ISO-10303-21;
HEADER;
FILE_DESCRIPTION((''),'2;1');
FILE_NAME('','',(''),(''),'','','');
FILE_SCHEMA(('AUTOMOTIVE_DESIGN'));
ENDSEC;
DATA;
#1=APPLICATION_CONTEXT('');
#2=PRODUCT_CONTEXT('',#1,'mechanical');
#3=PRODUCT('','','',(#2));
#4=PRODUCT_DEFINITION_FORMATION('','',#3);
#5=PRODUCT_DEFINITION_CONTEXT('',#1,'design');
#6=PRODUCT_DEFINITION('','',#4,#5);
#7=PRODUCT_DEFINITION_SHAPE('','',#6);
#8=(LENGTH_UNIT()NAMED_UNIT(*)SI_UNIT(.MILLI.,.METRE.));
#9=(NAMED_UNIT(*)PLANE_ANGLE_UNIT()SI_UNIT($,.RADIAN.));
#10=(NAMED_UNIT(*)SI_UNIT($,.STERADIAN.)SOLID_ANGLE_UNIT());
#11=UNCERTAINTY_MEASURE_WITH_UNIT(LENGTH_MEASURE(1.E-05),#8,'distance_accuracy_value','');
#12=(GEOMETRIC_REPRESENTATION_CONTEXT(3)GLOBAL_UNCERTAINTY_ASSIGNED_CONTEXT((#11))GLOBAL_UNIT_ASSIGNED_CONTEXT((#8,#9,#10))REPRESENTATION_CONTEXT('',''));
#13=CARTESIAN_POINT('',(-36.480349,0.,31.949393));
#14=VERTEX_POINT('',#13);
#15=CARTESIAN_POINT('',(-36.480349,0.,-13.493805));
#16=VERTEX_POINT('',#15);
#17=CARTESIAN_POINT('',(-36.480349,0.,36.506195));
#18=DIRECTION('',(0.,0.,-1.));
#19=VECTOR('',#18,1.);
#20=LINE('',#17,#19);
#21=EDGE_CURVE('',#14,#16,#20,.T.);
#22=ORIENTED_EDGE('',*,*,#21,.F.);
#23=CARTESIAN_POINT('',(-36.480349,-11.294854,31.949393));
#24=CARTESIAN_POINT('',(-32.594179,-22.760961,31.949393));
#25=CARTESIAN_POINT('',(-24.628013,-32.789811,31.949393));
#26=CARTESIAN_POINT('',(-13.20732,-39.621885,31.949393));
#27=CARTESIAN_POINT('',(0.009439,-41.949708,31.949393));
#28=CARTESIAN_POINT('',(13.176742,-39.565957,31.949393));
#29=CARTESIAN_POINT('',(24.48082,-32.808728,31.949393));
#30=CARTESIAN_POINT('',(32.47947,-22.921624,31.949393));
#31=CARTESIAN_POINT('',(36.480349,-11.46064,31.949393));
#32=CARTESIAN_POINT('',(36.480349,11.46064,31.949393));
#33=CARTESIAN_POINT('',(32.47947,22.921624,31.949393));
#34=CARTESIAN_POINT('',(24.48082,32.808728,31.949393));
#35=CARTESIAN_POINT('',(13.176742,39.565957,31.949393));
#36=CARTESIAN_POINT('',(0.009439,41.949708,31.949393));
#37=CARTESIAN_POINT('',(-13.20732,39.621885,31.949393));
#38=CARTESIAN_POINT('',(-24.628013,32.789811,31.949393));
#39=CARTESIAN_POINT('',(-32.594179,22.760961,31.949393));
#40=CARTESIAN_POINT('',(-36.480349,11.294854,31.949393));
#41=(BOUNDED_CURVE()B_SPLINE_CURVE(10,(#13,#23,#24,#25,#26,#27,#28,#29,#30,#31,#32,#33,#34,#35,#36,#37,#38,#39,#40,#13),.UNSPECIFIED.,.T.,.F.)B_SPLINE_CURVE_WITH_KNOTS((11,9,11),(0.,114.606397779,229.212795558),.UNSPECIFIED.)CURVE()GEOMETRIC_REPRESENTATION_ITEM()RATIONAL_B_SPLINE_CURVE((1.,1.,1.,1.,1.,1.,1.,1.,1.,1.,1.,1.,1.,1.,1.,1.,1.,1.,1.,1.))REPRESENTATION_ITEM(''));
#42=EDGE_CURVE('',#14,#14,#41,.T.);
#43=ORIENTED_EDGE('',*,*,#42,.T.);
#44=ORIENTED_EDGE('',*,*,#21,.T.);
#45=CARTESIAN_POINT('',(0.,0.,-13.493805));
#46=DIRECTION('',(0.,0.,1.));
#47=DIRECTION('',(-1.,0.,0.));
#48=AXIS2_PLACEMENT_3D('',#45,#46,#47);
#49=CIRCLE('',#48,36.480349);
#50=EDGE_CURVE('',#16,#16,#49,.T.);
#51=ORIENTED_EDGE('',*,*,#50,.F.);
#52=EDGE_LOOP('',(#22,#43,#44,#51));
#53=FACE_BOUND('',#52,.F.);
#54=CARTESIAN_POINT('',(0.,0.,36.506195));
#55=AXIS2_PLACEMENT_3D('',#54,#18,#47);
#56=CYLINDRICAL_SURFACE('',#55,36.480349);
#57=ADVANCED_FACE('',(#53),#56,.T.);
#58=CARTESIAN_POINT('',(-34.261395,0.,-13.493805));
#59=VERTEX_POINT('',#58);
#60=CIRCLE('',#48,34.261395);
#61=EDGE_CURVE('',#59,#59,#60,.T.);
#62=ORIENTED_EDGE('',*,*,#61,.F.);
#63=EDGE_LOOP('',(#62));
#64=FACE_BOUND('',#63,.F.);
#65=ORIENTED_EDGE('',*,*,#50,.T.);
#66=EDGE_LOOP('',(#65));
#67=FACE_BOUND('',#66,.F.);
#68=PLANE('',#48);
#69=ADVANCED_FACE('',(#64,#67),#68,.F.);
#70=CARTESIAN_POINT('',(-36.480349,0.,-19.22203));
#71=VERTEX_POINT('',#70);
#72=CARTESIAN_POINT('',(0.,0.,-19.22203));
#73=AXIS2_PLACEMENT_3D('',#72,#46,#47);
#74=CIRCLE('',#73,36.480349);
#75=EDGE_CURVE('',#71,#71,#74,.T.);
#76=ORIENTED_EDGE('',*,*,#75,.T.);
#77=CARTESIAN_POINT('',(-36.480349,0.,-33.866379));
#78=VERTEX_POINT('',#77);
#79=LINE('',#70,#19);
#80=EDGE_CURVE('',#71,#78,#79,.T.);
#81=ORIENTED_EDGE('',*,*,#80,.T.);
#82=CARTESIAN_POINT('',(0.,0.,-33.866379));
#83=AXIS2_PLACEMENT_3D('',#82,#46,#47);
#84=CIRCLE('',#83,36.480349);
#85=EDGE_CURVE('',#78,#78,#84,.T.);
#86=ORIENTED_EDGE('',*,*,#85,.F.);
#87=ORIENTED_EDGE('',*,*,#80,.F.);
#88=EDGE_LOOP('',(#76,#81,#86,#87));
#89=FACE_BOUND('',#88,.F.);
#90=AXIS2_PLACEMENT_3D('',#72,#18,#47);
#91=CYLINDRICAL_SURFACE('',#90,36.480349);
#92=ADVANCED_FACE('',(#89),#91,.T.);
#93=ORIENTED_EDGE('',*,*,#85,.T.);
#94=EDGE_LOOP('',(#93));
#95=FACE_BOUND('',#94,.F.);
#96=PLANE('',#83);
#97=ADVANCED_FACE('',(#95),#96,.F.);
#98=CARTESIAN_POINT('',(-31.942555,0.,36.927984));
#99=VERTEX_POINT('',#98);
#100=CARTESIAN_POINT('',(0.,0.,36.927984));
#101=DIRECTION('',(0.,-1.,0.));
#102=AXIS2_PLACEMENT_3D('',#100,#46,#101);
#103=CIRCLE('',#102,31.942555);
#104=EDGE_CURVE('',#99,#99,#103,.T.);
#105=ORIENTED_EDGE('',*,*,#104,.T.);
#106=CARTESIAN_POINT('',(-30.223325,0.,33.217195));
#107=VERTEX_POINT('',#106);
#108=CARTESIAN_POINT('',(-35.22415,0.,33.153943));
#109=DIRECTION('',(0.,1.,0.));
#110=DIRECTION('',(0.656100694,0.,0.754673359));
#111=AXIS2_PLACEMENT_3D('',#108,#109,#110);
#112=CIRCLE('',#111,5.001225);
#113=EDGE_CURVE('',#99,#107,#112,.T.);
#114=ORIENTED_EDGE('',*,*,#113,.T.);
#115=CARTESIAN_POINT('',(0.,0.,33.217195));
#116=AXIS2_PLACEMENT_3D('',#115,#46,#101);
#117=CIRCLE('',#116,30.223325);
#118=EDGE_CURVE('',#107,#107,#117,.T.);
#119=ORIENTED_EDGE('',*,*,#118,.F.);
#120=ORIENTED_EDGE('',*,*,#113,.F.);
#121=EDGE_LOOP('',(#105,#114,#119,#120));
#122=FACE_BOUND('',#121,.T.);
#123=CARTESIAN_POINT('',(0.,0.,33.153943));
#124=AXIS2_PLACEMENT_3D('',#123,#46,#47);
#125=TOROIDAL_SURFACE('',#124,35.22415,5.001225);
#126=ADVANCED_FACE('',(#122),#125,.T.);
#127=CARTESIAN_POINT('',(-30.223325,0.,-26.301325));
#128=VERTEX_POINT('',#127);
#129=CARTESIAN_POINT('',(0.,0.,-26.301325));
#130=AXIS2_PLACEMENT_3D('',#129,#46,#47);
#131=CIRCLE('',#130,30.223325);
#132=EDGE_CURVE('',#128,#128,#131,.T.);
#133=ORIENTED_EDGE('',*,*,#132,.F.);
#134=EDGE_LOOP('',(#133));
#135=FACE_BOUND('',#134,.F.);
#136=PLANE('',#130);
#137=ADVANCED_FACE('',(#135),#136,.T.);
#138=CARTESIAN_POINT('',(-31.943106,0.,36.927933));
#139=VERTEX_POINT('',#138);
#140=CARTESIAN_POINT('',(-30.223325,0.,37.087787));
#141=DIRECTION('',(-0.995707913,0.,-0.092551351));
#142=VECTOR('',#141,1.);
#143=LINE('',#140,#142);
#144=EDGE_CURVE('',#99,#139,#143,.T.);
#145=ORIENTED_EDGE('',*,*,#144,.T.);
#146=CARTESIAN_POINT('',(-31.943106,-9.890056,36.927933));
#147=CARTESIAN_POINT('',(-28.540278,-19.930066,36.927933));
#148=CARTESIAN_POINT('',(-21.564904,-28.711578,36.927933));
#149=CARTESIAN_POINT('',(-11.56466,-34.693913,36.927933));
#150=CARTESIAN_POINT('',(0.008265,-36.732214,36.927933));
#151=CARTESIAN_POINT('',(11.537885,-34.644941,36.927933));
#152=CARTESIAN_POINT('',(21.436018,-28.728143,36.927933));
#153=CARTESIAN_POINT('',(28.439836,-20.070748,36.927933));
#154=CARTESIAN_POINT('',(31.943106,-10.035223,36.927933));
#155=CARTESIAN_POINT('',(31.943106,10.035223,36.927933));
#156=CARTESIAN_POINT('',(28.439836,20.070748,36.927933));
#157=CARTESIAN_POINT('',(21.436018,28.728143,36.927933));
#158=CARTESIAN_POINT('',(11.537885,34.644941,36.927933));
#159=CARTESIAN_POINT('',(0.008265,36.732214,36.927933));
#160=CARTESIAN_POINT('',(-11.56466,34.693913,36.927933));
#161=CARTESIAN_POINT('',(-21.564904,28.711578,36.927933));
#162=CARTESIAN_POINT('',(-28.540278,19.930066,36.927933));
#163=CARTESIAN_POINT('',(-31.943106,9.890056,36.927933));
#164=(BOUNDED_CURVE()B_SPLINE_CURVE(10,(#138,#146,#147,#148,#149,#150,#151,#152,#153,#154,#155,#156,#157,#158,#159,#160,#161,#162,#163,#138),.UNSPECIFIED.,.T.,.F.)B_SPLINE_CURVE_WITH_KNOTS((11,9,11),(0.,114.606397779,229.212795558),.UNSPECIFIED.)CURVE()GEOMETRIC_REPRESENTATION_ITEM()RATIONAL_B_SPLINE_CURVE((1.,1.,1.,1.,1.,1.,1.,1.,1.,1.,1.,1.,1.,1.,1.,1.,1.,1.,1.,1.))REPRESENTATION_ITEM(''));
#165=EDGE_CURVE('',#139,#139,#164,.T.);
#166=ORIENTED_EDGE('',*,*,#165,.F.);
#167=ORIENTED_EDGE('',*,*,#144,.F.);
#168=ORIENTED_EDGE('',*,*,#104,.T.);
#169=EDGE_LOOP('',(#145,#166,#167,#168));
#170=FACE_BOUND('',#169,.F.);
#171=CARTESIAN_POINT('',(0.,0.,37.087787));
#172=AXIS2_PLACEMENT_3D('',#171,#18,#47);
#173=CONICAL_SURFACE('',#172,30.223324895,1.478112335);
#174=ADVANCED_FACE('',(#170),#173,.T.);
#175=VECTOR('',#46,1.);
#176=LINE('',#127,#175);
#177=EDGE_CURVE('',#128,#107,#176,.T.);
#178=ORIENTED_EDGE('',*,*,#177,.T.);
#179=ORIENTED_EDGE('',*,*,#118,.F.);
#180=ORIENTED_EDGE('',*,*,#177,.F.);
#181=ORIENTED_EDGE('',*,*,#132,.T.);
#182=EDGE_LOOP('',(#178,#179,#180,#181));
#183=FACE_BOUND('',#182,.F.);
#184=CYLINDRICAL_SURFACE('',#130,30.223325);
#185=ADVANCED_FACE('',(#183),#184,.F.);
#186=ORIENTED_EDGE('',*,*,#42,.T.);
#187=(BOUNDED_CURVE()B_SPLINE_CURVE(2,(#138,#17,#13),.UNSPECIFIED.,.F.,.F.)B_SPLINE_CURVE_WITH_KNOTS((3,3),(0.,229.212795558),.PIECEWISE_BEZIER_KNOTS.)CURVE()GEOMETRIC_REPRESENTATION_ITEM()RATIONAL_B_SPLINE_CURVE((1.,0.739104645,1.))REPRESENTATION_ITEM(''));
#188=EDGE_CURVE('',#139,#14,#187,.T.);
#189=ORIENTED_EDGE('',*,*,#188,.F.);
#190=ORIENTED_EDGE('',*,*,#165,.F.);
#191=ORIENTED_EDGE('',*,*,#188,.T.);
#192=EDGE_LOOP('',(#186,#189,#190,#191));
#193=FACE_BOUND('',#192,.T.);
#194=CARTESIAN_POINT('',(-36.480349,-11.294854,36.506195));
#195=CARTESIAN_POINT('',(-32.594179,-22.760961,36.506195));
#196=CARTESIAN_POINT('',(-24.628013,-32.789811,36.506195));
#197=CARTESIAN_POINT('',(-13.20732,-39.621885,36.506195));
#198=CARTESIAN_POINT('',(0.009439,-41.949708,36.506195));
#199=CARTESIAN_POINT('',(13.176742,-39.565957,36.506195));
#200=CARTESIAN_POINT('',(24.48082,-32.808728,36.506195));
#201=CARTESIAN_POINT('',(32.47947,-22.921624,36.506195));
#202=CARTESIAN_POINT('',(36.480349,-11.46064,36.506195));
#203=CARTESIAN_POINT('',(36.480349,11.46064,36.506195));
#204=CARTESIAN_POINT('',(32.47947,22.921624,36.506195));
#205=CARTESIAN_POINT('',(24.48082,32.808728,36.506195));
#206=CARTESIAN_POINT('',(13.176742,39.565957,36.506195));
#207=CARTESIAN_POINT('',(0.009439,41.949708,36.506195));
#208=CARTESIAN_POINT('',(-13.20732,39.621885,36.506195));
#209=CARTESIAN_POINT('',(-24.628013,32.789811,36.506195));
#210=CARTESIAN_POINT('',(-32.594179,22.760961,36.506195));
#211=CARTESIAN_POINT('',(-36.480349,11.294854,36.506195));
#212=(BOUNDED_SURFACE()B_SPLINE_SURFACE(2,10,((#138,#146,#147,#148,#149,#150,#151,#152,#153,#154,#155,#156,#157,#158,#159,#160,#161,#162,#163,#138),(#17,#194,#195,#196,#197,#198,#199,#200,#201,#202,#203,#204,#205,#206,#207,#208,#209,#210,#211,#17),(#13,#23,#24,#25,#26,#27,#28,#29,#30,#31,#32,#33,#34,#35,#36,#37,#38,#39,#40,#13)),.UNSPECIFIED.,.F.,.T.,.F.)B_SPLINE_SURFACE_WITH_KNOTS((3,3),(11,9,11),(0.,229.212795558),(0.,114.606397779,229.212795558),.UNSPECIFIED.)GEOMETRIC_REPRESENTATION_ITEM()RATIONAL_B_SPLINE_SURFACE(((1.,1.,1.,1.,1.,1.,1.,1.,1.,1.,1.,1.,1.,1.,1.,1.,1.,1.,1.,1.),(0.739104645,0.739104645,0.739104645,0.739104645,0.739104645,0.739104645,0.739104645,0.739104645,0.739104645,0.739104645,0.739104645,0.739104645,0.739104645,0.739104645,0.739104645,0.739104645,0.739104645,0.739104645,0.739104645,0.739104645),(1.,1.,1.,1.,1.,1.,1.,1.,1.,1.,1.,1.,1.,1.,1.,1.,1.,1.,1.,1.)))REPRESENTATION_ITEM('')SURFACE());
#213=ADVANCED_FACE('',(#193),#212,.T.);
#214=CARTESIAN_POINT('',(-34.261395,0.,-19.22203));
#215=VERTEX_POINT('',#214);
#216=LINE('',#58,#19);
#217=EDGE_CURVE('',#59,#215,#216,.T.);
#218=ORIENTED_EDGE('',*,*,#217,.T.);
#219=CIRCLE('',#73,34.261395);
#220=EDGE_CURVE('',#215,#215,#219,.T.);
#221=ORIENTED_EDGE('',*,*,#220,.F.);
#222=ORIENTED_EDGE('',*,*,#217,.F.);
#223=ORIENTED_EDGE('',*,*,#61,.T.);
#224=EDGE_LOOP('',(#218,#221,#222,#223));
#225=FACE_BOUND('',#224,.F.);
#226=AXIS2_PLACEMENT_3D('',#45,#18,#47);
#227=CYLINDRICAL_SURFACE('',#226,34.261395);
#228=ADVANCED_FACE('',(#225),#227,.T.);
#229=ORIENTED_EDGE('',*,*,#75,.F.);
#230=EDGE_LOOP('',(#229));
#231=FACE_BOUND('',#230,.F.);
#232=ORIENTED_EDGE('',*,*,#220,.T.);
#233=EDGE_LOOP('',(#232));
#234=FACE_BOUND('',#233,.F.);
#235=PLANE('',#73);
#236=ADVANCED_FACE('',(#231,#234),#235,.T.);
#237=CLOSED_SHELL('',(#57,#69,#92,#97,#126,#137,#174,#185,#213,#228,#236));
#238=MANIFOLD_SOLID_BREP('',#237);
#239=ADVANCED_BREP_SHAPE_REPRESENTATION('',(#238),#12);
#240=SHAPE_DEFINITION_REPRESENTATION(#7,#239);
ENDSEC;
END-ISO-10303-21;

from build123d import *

# Parameters (mm, degrees)
F2_R = 5


# Not quite as in the source:
# - a fillet or chamfer that OpenCascade refuses, or shapes differently, is made with other operations: its cross-section is extruded or revolved along the edge and cut away or added


with BuildPart() as f1:
    # F0 (on Front) → F1 (revolve)
    with BuildSketch(Plane.XZ):
        Polygon((-30.2233248949, 37.0877869427), (-36.4803494329, 36.5061946213), (-36.4803494329, -13.4938053787), (-34.2613953475, -13.4938053787), (-34.2613953475, -19.2220297002), (-36.4803494329, -19.2220297002), (-36.4803494329, -33.86637941), (-19.9121574584, -33.86637941), (0, -33.86637941), (0, -26.3013252845), (-30.2233248949, -26.3013252845), align=None)
    revolve(axis=Axis((0, 0, -30.0838523473), (0, 0, 1)))

    # F2
    f2_edges = [f1.edges().sort_by_distance(p)[0] for p in [
        (36.480349, 0, 36.506195),
    ]]
    fillet(f2_edges, radius=F2_R)

    # F3: fillet of radius 5 on 2 edges, made by hand

    # F3_s1 → F3_t2 (revolve, cut)
    with BuildSketch(Plane.XZ):
        with BuildLine():
            ThreePointArc((-31.9428428579, 36.9282346211), (-30.6731716306, 35.2277917828), (-30.2229248949, 33.1539430061))
            Line((-30.2229248949, 33.1539430061), (-29.7228023494, 33.1539430061))
            ThreePointArc((-29.7228023494, 33.1539430061), (-29.7232023494, 35.1208649744), (-29.7232023494, 37.0877869427))
            Line((-29.7232023494, 37.0877869427), (-30.2696119123, 37.5857629186))
            ThreePointArc((-30.2696119123, 37.5857629186), (-31.1293581124, 37.5058492495), (-31.6147121087, 37.3056637826))
            Line((-31.6147121087, 37.3056637826), (-31.9428428579, 36.9282346211))
        make_face()
    revolve(axis=Axis((0, 0, 37.0877869427), (0, 0, 1)), mode=Mode.SUBTRACT)


solid = f1.part
